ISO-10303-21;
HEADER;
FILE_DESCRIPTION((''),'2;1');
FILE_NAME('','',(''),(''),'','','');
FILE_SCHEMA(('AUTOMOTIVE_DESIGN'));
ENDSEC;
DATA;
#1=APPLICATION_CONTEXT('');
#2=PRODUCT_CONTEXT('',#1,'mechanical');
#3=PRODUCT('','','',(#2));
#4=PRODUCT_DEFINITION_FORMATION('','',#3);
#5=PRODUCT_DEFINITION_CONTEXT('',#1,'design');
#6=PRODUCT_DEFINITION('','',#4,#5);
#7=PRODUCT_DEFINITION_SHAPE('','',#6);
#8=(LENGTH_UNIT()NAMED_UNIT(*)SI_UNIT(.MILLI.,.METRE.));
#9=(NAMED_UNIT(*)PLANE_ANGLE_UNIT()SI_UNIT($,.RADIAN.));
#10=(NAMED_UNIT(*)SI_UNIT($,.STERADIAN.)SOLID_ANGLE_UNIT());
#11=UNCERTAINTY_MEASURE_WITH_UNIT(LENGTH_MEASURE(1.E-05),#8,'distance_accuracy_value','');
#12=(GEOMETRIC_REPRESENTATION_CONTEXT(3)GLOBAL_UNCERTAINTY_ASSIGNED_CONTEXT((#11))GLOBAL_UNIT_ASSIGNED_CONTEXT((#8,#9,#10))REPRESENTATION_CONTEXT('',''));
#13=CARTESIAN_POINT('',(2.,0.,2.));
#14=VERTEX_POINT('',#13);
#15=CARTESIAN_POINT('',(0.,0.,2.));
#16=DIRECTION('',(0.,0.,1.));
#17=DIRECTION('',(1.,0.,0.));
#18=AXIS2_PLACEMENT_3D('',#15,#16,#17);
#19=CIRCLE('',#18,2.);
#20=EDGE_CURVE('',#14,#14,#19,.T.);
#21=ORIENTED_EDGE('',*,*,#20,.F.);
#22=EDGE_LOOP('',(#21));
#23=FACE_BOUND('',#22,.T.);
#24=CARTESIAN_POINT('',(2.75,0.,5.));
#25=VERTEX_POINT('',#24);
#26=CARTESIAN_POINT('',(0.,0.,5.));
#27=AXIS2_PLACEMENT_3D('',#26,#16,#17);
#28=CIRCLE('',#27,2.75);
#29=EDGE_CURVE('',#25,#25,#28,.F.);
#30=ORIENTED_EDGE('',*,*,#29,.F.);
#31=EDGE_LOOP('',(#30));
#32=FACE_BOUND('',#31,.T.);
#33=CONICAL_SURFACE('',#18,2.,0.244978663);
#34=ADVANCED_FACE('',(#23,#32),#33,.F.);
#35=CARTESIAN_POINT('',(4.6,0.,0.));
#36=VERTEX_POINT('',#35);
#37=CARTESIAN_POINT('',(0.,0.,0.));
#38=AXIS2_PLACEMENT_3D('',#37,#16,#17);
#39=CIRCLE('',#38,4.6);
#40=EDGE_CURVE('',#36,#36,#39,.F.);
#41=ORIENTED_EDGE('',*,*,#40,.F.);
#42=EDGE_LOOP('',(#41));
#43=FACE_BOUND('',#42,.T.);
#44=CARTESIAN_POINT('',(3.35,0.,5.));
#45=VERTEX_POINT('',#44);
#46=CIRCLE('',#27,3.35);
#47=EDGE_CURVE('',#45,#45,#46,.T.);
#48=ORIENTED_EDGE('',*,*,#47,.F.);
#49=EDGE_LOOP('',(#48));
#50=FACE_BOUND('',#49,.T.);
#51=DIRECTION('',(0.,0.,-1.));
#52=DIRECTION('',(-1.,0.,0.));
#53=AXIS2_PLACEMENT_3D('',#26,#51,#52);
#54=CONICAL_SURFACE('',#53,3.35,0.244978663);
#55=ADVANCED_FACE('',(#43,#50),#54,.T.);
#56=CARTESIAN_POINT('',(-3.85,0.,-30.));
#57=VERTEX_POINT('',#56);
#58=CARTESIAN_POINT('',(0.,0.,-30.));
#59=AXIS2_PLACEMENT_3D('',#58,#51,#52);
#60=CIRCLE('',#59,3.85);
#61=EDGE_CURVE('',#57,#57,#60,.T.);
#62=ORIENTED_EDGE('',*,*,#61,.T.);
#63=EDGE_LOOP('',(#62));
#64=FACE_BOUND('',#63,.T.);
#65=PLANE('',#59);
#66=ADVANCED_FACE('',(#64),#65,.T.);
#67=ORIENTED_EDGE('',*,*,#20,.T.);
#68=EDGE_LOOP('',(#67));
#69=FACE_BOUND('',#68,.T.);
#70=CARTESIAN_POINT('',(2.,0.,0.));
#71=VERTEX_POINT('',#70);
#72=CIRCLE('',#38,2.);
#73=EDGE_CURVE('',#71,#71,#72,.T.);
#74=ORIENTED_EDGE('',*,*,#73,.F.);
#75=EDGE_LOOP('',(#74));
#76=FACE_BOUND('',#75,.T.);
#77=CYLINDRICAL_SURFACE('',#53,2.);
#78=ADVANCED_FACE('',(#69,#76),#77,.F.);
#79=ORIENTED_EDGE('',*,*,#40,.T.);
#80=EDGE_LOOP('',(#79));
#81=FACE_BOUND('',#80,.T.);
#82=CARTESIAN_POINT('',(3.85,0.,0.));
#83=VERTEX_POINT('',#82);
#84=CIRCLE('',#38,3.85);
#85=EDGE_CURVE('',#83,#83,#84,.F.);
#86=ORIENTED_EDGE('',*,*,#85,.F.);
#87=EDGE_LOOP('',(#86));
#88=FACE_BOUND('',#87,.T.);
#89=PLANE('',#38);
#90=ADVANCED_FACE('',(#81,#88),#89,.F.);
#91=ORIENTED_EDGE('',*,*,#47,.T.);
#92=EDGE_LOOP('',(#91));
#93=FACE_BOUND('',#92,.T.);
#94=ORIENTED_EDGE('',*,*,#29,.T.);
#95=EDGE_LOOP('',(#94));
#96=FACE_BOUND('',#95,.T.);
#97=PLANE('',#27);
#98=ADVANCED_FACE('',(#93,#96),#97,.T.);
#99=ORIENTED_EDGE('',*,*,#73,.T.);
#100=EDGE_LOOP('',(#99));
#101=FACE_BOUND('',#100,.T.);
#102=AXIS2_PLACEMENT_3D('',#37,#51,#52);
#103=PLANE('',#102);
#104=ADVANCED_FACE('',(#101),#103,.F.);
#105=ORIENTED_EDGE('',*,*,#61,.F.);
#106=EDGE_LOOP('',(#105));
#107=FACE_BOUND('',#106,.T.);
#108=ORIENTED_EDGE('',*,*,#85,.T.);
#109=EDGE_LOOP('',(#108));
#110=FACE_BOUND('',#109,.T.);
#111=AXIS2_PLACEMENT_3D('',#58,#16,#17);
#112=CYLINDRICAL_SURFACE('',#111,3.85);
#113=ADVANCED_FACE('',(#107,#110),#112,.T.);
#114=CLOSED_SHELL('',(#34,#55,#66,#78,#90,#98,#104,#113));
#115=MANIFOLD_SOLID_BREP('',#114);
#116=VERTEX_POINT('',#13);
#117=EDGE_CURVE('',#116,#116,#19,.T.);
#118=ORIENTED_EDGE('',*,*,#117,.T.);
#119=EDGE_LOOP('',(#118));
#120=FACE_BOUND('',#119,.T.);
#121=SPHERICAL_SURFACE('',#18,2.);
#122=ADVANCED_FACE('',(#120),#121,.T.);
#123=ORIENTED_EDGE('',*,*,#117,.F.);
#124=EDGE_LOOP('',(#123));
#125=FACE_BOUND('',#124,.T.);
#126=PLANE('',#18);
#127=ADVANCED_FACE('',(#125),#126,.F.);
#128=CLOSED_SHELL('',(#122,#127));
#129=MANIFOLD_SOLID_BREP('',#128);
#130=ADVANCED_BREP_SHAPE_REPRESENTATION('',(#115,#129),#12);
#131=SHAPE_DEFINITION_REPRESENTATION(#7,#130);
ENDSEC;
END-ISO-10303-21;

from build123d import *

# Parameters (mm, degrees)
ESQUISSE1_R        = 4.85
ESQUISSE1_R_2      = 2
BOSS_EXTRU_1_DEPTH = 5
CHANFREIN1_SIZE    = 6
CHANFREIN1_SIZE_2  = 1.5
CHANFREIN2_SIZE    = 0.75
CHANFREIN2_SIZE2   = 3
ESQUISSE4_R        = 2
BOSS_EXTRU_2_DEPTH = 2
CONG_1_R           = 2
ESQUISSE5_R        = 3.85
BOSS_EXTRU_3_DEPTH = 30


# Some blends are built 0.0001 mm under size
with BuildPart() as part:
    # Esquisse1 → Boss.-Extru.1 (new body)
    with BuildSketch(Plane.XY):
        Circle(ESQUISSE1_R)
        Circle(ESQUISSE1_R_2, mode=Mode.SUBTRACT)
    extrude(amount=BOSS_EXTRU_1_DEPTH)

    # Chanfrein1
    # the kernel refuses this chamfer: 6, 1.5 mm, written as the material it takes off along each edge
    with BuildSketch(Plane(origin=(0, 0, 5), x_dir=(1, 0, 0), z_dir=(0, -1, 0))) as chanfrein1_piece_1:
        Polygon((4.85, -CHANFREIN1_SIZE), (4.85 - CHANFREIN1_SIZE_2, 0), (4.85, 0), align=None)
    revolve(axis=Axis((0, 0, 5), (0, 0, 1)), mode=Mode.SUBTRACT)

    # Chanfrein2
    chanfrein2_edges = [part.edges().sort_by_distance(p)[0] for p in [
        (-2, 0, 5),
    ]]
    chanfrein2_side = [part.faces().sort_by_distance(p)[0] for p in [
        (-3.255247691, 0, 5),
    ]]
    chamfer(chanfrein2_edges, length=CHANFREIN2_SIZE, length2=CHANFREIN2_SIZE2, reference=chanfrein2_side[0])

    # Esquisse5 → Boss.-Extru.3 (add)
    with BuildSketch(Plane(origin=(0, 0, 0), x_dir=(-1, 0, 0), z_dir=(0, 0, -1))):
        with Locations(Location((0, 0, 0), (0, 0, 180))):
            Circle(ESQUISSE5_R)
    extrude(amount=BOSS_EXTRU_3_DEPTH)


with BuildPart() as body_2:
    # Esquisse4 → Boss.-Extru.2 (new body)
    with BuildSketch(Plane.XY.offset(2)):
        Circle(ESQUISSE4_R)
    extrude(amount=BOSS_EXTRU_2_DEPTH)

    # Congé1
    cong_1_edges = [body_2.edges().sort_by_distance(p)[0] for p in [
        (-2, 0, 4),
    ]]
    fillet(cong_1_edges, radius=CONG_1_R - 0.0001)  # a hair under: the kernel refuses the full size


solid = Compound([part.part, body_2.part])
